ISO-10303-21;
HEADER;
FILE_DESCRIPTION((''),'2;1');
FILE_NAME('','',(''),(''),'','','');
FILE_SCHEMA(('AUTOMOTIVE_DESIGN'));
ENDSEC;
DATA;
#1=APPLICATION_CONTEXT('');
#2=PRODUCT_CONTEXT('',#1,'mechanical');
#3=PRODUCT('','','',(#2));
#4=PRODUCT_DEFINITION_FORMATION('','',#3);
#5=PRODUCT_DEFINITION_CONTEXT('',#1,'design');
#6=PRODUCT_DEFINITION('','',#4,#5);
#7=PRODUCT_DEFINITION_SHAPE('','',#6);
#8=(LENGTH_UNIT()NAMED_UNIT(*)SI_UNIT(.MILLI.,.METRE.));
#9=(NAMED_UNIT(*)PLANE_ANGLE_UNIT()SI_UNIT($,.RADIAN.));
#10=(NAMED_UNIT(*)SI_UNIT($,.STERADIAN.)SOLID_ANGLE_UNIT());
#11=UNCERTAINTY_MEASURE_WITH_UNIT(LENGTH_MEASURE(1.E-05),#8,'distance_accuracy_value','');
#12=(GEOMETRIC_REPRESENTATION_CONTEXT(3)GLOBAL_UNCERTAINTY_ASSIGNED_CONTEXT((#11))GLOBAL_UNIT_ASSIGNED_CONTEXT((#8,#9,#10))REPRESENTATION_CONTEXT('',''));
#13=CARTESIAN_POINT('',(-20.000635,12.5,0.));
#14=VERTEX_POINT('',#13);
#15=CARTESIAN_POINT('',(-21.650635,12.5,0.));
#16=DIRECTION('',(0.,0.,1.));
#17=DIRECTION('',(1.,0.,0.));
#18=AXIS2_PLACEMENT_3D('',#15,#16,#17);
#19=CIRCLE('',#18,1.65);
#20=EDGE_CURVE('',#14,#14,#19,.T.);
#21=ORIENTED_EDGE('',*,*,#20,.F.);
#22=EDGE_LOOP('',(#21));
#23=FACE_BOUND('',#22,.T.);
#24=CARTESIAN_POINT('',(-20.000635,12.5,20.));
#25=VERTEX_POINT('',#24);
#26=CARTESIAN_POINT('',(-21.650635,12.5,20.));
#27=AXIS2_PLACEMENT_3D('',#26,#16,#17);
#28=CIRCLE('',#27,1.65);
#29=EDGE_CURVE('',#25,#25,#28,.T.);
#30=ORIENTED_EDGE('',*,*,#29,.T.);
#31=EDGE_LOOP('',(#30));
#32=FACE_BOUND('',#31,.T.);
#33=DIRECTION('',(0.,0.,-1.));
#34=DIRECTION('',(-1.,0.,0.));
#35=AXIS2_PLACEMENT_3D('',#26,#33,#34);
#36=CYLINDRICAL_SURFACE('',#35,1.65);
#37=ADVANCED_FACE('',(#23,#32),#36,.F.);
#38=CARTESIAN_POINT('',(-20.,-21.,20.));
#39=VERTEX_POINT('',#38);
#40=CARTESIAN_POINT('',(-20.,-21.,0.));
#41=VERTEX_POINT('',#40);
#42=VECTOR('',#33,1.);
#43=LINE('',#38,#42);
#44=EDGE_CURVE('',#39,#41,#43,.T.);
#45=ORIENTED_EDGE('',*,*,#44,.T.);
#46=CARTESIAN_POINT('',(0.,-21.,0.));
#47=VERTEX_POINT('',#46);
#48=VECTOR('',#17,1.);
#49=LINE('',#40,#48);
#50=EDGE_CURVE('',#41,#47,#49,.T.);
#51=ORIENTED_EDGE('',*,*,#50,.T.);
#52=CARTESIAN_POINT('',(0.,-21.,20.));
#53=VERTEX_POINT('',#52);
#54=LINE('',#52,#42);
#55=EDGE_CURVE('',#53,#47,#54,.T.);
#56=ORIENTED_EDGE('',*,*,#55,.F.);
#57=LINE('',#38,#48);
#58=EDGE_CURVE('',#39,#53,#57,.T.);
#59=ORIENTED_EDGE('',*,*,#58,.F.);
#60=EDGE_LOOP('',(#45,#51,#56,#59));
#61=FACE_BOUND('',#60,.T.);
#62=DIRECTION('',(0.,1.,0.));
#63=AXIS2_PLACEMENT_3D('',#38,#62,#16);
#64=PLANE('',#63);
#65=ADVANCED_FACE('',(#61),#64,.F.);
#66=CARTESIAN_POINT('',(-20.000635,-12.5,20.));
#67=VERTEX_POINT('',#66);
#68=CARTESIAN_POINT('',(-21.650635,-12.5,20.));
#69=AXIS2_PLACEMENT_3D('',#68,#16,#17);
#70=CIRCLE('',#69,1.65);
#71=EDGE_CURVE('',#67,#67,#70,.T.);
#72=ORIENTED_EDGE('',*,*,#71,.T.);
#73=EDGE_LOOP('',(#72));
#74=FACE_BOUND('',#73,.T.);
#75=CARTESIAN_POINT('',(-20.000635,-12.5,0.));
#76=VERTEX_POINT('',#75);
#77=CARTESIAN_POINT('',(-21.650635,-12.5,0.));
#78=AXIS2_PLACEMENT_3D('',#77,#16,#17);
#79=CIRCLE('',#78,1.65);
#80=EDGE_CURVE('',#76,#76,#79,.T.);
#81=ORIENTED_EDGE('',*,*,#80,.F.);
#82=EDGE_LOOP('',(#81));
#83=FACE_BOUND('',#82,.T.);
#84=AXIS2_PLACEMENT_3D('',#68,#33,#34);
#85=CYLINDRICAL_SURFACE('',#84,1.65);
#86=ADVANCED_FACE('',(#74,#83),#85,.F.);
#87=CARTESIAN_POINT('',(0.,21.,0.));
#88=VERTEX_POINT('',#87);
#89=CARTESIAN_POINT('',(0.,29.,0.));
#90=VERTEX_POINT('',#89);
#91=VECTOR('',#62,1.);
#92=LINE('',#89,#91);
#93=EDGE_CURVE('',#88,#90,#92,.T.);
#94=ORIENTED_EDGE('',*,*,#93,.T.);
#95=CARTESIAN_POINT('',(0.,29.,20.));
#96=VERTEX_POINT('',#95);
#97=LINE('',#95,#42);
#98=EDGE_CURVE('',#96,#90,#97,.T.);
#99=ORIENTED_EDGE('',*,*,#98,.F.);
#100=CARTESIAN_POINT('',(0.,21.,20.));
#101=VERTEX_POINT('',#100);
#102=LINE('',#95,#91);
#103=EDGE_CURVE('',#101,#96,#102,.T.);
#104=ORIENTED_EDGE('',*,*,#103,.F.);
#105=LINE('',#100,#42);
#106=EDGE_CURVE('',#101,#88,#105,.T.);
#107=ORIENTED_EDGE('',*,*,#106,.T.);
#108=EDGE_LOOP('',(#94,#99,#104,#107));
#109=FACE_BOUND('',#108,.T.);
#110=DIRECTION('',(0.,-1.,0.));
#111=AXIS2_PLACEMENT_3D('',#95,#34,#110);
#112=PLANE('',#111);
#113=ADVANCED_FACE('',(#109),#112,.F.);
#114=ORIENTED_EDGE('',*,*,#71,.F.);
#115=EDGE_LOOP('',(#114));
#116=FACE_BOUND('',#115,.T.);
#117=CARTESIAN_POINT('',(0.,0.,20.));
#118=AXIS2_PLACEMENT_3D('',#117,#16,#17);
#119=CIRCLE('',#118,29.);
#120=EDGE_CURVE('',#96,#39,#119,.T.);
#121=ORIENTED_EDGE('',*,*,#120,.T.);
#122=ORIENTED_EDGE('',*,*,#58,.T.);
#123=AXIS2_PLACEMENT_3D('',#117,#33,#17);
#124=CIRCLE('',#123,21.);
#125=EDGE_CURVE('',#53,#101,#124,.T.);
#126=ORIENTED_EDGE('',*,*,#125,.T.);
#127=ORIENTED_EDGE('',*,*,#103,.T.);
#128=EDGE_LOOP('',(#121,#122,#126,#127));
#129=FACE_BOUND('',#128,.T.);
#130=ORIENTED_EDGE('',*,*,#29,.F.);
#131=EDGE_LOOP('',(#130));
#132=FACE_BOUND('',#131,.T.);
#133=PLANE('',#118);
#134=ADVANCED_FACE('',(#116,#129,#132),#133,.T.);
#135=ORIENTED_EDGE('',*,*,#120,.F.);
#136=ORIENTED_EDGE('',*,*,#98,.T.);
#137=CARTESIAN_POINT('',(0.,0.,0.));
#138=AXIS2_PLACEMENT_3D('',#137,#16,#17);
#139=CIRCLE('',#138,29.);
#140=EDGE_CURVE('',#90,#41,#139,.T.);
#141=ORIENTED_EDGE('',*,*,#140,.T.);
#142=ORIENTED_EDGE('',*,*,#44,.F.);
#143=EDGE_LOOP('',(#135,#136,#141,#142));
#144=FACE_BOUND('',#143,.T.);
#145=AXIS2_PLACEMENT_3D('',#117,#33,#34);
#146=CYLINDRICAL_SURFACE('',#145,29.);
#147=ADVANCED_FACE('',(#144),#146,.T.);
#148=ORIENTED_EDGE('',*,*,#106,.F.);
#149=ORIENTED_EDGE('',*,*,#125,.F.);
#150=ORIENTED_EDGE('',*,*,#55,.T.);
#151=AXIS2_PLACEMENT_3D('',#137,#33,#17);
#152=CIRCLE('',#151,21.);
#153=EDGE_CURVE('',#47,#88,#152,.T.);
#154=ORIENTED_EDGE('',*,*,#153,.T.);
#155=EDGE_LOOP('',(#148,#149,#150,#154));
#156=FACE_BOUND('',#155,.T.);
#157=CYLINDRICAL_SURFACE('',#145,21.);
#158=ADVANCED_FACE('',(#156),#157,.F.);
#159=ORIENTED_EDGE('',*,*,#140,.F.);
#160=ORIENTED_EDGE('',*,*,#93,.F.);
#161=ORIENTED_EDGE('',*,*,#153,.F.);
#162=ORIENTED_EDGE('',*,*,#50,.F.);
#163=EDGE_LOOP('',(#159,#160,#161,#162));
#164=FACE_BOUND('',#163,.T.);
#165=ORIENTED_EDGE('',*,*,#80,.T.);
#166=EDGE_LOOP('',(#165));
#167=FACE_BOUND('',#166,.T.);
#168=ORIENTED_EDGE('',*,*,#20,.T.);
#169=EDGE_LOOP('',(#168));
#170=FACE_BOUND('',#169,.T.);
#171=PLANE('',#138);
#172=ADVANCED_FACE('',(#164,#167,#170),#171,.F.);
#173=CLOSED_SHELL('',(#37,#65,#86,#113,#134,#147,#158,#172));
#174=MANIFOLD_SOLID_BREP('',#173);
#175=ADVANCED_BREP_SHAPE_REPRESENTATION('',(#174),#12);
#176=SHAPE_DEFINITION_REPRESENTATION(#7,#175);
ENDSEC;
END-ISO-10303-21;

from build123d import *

# Parameters (mm, degrees)
EXTRUDE_2_DEPTH         = 20
SKETCH_3_R              = 1.65
CUT_EXTRUDE_2_DEPTH     = 20
DELETE_FACE_1_OUTLINE_R = 1.65
DELETE_FACE_1_DEPTH     = 20


# Read off the part's stored shape, not the designer's step: 删除面1
with BuildPart() as part:
    # 草图1 → 凸台-拉伸2 (new body)
    with BuildSketch(Plane.XY):
        with BuildLine():
            Line((-20, -21), (0, -21))
            ThreePointArc((0, -21), (-21, 0), (0, 21))
            Line((0, 21), (0, 29))
            ThreePointArc((0, 29), (-26.925824036, 10.770329614), (-20, -21))
        make_face()
    extrude(amount=EXTRUDE_2_DEPTH)

    # 草图3 → 切除-拉伸2 (cut)
    with BuildSketch(Plane.XY):
        with Locations((-12.5, 21.650635095)):
            Circle(SKETCH_3_R)
        with Locations((-21.650635095, 12.5)):
            Circle(SKETCH_3_R)
        with Locations((-21.650635095, -12.5)):
            Circle(SKETCH_3_R)
    extrude(amount=CUT_EXTRUDE_2_DEPTH, mode=Mode.SUBTRACT)

    # Delete Face 1 outline → Delete Face 1 (add)
    with BuildSketch(Plane.XY):
        with Locations((-12.5, 21.650635095)):
            Circle(DELETE_FACE_1_OUTLINE_R)
    extrude(amount=DELETE_FACE_1_DEPTH)


solid = part.part
